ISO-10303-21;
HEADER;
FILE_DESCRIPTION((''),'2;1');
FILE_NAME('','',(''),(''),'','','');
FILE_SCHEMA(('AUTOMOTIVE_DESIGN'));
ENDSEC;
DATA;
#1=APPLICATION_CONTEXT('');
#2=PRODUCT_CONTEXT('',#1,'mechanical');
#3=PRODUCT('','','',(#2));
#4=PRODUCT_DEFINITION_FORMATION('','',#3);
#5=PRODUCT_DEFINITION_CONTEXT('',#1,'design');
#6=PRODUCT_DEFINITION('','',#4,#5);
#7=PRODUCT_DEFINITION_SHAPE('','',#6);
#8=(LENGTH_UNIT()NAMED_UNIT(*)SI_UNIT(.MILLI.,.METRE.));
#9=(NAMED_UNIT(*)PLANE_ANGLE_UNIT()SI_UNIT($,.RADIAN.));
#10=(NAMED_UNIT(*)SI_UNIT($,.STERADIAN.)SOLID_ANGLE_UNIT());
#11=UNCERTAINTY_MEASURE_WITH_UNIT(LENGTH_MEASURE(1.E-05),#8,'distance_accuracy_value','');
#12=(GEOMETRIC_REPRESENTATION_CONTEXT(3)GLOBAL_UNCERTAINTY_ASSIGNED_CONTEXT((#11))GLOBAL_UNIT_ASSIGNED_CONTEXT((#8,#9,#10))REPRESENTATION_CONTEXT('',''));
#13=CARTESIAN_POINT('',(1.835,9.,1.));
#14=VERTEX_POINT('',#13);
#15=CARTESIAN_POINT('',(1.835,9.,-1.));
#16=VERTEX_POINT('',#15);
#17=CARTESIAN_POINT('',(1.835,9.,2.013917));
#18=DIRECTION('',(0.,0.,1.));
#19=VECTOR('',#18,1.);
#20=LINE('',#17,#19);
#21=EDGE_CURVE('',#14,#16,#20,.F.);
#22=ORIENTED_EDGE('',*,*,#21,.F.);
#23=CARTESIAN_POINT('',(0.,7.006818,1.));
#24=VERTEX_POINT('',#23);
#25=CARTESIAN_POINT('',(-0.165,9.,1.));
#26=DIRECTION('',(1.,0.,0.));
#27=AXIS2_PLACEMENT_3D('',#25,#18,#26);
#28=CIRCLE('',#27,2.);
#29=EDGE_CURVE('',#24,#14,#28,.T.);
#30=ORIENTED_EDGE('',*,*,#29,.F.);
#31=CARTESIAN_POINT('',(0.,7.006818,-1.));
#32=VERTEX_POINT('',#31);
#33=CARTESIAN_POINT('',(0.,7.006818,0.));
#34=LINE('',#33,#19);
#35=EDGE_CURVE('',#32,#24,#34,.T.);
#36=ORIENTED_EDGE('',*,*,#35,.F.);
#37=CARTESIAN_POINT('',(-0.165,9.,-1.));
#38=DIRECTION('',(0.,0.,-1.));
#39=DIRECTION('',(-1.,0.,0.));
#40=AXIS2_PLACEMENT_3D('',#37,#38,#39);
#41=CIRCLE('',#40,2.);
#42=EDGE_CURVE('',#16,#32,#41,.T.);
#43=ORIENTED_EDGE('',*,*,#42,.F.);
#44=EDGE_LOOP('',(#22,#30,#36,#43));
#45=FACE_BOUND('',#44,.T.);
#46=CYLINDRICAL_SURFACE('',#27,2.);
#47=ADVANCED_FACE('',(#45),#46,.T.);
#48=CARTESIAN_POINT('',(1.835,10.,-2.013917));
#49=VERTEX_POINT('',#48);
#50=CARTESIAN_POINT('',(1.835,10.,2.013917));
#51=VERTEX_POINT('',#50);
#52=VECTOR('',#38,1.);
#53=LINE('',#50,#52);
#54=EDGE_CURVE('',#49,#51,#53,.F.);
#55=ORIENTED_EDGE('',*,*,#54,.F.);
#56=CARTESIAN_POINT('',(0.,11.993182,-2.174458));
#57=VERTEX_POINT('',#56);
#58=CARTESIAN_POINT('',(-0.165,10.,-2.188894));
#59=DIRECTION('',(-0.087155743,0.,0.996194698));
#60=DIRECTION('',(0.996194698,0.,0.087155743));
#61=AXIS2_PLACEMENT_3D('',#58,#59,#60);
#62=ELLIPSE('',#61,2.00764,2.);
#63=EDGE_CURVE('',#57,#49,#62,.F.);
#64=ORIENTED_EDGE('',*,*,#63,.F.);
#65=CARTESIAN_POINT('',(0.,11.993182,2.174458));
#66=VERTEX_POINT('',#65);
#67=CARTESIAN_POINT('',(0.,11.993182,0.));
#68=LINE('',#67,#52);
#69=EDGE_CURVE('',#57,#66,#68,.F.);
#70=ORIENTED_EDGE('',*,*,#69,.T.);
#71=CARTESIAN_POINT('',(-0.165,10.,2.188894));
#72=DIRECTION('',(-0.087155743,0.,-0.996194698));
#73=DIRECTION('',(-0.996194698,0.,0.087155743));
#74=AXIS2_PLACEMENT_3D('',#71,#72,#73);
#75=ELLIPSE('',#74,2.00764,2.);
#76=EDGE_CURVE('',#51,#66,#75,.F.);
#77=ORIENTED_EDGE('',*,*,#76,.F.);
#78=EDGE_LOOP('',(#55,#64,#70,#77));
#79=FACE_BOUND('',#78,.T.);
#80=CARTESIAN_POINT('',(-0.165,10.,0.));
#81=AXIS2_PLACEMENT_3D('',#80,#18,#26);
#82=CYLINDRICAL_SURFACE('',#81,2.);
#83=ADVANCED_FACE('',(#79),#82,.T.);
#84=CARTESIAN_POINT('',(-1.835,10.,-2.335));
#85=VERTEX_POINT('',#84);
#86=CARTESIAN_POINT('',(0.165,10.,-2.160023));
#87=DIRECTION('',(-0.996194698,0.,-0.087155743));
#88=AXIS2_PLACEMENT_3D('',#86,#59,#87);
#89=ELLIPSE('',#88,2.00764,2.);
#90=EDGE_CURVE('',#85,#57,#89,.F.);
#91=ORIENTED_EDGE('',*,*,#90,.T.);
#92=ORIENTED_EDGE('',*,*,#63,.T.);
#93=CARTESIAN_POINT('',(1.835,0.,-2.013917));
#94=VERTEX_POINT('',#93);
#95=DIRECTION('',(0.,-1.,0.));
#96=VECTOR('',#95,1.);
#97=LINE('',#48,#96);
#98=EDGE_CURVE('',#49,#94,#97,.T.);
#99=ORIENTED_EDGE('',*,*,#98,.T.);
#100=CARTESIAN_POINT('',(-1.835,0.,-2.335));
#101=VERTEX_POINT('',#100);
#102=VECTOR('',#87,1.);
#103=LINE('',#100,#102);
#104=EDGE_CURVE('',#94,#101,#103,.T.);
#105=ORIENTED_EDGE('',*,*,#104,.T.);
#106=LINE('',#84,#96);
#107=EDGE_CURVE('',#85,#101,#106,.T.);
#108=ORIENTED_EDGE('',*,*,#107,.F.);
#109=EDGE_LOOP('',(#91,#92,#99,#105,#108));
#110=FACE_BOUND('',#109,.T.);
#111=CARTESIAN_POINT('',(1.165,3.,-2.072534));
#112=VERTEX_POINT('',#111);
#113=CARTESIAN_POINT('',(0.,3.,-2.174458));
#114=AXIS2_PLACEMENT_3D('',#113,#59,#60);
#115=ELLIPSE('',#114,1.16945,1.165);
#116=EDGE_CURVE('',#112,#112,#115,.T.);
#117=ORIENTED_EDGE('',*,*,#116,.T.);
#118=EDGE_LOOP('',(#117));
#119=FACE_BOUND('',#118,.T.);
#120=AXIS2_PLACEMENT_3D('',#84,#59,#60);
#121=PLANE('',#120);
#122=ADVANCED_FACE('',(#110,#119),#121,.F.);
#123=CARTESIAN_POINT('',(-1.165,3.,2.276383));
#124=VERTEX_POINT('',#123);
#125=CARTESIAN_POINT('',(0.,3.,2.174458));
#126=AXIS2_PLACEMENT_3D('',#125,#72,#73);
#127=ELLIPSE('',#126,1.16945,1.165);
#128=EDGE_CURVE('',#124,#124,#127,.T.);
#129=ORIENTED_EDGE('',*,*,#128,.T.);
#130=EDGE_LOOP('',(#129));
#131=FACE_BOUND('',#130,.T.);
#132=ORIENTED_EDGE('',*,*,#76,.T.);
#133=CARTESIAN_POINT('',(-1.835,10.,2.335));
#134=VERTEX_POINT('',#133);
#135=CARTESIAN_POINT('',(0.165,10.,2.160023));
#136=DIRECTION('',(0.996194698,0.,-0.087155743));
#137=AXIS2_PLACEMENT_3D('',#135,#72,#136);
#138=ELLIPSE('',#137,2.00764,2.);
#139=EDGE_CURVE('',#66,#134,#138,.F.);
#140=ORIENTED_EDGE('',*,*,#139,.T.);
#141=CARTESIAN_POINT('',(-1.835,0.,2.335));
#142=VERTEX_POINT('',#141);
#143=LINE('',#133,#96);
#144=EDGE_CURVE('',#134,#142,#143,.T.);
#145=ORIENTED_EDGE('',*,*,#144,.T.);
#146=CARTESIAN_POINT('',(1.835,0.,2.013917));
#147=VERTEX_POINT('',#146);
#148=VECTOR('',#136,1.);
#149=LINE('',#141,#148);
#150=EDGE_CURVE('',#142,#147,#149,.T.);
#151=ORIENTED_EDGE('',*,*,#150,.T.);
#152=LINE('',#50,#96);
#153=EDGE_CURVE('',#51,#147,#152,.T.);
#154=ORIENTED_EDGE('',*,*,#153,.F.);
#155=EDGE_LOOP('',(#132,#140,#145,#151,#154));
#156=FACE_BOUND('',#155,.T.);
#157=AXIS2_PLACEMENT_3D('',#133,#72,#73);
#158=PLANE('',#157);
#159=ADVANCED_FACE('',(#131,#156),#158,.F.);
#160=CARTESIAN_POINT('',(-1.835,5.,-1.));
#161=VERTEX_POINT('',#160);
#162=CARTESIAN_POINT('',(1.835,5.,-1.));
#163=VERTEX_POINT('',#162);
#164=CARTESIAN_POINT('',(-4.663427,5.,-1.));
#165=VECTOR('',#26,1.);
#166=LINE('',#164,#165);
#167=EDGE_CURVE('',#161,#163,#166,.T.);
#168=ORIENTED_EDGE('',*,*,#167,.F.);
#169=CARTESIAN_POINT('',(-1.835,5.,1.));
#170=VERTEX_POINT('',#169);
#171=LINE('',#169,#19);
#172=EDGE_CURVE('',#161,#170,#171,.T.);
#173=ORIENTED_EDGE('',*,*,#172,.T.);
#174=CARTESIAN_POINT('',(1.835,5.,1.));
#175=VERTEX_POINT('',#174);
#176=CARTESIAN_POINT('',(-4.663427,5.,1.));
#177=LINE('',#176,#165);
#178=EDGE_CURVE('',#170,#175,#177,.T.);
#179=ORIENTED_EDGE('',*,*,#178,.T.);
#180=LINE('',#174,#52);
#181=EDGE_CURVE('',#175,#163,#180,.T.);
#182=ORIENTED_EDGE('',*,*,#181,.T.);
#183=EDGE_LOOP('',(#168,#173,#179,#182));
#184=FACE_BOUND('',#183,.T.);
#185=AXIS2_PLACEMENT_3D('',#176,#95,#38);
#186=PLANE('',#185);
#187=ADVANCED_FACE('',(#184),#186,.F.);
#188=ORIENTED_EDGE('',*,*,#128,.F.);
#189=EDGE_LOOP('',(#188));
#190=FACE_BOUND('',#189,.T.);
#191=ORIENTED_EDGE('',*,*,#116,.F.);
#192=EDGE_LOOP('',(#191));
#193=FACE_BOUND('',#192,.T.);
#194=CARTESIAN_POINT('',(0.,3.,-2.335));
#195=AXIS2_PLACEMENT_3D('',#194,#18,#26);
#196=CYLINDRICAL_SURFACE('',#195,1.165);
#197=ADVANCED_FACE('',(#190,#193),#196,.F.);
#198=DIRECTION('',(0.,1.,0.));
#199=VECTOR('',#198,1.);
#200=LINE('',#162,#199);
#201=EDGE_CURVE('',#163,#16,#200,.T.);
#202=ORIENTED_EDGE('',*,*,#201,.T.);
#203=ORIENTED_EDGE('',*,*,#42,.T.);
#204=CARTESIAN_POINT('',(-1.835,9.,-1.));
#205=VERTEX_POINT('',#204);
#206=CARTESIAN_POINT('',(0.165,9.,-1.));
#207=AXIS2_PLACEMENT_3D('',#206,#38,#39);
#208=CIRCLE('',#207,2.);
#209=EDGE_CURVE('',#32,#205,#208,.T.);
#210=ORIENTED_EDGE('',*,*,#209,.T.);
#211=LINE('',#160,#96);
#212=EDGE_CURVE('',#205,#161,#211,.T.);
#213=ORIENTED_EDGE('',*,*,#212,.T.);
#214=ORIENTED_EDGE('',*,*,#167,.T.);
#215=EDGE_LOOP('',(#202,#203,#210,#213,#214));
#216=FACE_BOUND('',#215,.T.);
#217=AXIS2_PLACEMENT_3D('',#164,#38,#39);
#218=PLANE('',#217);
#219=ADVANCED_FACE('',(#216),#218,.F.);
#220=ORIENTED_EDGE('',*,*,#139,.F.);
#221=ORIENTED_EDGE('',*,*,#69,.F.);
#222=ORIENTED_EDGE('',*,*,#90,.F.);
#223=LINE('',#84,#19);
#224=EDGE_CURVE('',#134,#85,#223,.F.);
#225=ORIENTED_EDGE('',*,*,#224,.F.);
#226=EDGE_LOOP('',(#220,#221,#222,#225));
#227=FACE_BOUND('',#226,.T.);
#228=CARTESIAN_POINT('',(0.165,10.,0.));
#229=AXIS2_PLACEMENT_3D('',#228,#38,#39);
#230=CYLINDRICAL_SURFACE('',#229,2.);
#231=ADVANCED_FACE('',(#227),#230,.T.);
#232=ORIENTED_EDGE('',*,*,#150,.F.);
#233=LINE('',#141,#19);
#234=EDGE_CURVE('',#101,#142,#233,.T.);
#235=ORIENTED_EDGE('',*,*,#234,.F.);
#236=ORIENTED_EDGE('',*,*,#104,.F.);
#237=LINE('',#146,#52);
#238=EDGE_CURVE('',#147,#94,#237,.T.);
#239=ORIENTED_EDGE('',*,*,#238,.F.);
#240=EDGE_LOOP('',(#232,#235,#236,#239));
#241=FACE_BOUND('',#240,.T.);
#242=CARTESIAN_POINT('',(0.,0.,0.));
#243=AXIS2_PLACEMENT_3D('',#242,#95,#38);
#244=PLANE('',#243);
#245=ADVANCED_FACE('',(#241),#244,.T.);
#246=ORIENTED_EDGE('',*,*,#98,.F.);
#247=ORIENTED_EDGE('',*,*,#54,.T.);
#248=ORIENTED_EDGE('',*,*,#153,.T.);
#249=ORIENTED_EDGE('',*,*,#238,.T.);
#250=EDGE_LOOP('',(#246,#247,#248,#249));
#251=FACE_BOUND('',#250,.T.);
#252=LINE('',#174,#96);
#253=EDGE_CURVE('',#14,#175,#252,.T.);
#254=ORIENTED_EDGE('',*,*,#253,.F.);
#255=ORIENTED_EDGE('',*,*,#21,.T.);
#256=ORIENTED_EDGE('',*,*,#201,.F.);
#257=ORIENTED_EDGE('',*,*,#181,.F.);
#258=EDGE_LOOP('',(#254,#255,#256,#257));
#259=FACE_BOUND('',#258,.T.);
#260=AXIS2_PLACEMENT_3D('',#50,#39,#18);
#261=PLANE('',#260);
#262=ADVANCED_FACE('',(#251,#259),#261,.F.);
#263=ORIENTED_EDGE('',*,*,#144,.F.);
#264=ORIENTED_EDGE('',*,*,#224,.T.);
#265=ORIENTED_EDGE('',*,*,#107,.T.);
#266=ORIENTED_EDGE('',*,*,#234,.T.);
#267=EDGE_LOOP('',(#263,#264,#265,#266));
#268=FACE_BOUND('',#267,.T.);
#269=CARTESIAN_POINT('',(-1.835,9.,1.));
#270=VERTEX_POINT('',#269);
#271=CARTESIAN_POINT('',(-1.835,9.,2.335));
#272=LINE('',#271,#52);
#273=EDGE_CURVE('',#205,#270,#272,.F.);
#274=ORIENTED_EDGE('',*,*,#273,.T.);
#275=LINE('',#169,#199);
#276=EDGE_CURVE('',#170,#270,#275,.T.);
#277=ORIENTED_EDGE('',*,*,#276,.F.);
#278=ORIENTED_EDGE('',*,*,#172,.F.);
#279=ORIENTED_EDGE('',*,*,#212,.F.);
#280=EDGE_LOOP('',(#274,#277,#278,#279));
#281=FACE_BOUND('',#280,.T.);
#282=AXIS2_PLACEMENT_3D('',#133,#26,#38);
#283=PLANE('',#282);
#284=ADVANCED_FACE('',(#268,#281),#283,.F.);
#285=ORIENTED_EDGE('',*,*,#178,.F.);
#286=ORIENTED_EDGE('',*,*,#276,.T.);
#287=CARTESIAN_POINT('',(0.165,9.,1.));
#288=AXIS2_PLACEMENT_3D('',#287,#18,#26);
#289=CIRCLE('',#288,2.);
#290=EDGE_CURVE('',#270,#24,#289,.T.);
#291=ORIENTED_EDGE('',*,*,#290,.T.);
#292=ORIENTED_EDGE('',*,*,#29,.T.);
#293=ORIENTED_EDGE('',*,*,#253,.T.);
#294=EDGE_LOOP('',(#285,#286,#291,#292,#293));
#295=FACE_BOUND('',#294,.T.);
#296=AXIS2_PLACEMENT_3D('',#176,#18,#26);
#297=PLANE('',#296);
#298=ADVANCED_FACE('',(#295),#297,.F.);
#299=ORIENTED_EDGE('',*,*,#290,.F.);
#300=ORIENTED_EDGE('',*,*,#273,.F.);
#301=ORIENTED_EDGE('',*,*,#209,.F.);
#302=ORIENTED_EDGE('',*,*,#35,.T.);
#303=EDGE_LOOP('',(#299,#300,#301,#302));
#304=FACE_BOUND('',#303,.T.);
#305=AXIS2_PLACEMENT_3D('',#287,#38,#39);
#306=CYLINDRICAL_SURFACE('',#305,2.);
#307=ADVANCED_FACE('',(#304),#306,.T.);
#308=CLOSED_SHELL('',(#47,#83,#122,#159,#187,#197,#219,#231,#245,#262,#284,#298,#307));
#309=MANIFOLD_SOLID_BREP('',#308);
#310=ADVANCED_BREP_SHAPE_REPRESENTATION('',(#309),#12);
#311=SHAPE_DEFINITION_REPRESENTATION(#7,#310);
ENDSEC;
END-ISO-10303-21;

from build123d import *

# Parameters (mm, degrees)
BOSS_EXTRUDE1_DEPTH     = 10
BOSS_EXTRUDE2_DEPTH     = 2
SKETCH4_W               = 2
SKETCH4_H               = 2
CUT_EXTRUDE1_DEPTH      = 3.67
FILLET1_R               = 2
CUT_EXTRUDE2_DEPTH      = 13.355398317
CUT_EXTRUDE2_DEPTH_BACK = 13.355398317
SKETCH6_R               = 1.165


with BuildPart() as part:
    # Sketch2 → Boss-Extrude1 (new body)
    with BuildSketch(Plane(origin=(0, 0, 0), x_dir=(1, 0, 0), z_dir=(0, 1, 0))):
        Polygon((-1.835, -2.335), (-1.835, 2.335), (1.835, 2.013916605), (1.835, -2.013916605), align=None)
    extrude(amount=BOSS_EXTRUDE1_DEPTH)

    # Sketch3 → Boss-Extrude2 (add)
    with BuildSketch(Plane(origin=(0, 10, 0), x_dir=(1, 0, 0), z_dir=(0, 1, 0))):
        Polygon((1.835, -2.013916605), (1.835, 2.013916605), (-1.835, 2.335), (-1.835, -2.335), align=None)
    extrude(amount=BOSS_EXTRUDE2_DEPTH)

    # Sketch4 → Cut-Extrude1 (cut)
    with BuildSketch(Plane(origin=(1.835, 0, 0), x_dir=(0, 0, -1), z_dir=(1, 0, 0))):
        with Locations((0, 6)):
            Rectangle(SKETCH4_W, SKETCH4_H)
    extrude(amount=-CUT_EXTRUDE1_DEPTH, mode=Mode.SUBTRACT)

    # Fillet1
    # the kernel refuses this fillet: 2 mm, written as the material it takes off along each edge
    with BuildSketch(Plane(origin=(1.835, 12, 7.013916605), x_dir=(-1, 0, 0), z_dir=(0, 0, -1))) as fillet1_piece_1:
        with BuildLine():
            CenterArc((FILLET1_R, -FILLET1_R), FILLET1_R, 90, 90)
            Line((0, -FILLET1_R), (0, 0))
            Line((0, 0), (FILLET1_R, 0))
        make_face()
    extrude(amount=14.02783321, mode=Mode.SUBTRACT)
    with BuildSketch(Plane(origin=(-1.835, 12, -7.335), x_dir=(0, -1, 0), z_dir=(0, 0, 1))) as fillet1_piece_2:
        with BuildLine():
            CenterArc((FILLET1_R, FILLET1_R), FILLET1_R, 180, 90)
            Line((0, FILLET1_R), (0, 0))
            Line((0, 0), (FILLET1_R, 0))
        make_face()
    extrude(amount=14.67, mode=Mode.SUBTRACT)
    with BuildSketch(Plane(origin=(-1.835, 7, -1), x_dir=(0, 1, 0), z_dir=(0, 0, 1)), Plane(origin=(1.835, 7, -1), x_dir=(-1, 0, 0), z_dir=(0, 0, 1))) as fillet1_piece_3:
        with BuildLine():
            CenterArc((FILLET1_R, -FILLET1_R), FILLET1_R, 90, 90)
            Line((0, -FILLET1_R), (0, 0))
            Line((0, 0), (FILLET1_R, 0))
        make_face()
    extrude(amount=2, mode=Mode.SUBTRACT)

    # Sketch6 → Cut-Extrude2 (cut, two sides: drawn at the far end of the back side and taken through both)
    with BuildSketch(Plane.XY.offset(-CUT_EXTRUDE2_DEPTH_BACK)):
        with Locations((0, 3)):
            Circle(SKETCH6_R)
    extrude(amount=CUT_EXTRUDE2_DEPTH + CUT_EXTRUDE2_DEPTH_BACK, mode=Mode.SUBTRACT)


solid = part.part
